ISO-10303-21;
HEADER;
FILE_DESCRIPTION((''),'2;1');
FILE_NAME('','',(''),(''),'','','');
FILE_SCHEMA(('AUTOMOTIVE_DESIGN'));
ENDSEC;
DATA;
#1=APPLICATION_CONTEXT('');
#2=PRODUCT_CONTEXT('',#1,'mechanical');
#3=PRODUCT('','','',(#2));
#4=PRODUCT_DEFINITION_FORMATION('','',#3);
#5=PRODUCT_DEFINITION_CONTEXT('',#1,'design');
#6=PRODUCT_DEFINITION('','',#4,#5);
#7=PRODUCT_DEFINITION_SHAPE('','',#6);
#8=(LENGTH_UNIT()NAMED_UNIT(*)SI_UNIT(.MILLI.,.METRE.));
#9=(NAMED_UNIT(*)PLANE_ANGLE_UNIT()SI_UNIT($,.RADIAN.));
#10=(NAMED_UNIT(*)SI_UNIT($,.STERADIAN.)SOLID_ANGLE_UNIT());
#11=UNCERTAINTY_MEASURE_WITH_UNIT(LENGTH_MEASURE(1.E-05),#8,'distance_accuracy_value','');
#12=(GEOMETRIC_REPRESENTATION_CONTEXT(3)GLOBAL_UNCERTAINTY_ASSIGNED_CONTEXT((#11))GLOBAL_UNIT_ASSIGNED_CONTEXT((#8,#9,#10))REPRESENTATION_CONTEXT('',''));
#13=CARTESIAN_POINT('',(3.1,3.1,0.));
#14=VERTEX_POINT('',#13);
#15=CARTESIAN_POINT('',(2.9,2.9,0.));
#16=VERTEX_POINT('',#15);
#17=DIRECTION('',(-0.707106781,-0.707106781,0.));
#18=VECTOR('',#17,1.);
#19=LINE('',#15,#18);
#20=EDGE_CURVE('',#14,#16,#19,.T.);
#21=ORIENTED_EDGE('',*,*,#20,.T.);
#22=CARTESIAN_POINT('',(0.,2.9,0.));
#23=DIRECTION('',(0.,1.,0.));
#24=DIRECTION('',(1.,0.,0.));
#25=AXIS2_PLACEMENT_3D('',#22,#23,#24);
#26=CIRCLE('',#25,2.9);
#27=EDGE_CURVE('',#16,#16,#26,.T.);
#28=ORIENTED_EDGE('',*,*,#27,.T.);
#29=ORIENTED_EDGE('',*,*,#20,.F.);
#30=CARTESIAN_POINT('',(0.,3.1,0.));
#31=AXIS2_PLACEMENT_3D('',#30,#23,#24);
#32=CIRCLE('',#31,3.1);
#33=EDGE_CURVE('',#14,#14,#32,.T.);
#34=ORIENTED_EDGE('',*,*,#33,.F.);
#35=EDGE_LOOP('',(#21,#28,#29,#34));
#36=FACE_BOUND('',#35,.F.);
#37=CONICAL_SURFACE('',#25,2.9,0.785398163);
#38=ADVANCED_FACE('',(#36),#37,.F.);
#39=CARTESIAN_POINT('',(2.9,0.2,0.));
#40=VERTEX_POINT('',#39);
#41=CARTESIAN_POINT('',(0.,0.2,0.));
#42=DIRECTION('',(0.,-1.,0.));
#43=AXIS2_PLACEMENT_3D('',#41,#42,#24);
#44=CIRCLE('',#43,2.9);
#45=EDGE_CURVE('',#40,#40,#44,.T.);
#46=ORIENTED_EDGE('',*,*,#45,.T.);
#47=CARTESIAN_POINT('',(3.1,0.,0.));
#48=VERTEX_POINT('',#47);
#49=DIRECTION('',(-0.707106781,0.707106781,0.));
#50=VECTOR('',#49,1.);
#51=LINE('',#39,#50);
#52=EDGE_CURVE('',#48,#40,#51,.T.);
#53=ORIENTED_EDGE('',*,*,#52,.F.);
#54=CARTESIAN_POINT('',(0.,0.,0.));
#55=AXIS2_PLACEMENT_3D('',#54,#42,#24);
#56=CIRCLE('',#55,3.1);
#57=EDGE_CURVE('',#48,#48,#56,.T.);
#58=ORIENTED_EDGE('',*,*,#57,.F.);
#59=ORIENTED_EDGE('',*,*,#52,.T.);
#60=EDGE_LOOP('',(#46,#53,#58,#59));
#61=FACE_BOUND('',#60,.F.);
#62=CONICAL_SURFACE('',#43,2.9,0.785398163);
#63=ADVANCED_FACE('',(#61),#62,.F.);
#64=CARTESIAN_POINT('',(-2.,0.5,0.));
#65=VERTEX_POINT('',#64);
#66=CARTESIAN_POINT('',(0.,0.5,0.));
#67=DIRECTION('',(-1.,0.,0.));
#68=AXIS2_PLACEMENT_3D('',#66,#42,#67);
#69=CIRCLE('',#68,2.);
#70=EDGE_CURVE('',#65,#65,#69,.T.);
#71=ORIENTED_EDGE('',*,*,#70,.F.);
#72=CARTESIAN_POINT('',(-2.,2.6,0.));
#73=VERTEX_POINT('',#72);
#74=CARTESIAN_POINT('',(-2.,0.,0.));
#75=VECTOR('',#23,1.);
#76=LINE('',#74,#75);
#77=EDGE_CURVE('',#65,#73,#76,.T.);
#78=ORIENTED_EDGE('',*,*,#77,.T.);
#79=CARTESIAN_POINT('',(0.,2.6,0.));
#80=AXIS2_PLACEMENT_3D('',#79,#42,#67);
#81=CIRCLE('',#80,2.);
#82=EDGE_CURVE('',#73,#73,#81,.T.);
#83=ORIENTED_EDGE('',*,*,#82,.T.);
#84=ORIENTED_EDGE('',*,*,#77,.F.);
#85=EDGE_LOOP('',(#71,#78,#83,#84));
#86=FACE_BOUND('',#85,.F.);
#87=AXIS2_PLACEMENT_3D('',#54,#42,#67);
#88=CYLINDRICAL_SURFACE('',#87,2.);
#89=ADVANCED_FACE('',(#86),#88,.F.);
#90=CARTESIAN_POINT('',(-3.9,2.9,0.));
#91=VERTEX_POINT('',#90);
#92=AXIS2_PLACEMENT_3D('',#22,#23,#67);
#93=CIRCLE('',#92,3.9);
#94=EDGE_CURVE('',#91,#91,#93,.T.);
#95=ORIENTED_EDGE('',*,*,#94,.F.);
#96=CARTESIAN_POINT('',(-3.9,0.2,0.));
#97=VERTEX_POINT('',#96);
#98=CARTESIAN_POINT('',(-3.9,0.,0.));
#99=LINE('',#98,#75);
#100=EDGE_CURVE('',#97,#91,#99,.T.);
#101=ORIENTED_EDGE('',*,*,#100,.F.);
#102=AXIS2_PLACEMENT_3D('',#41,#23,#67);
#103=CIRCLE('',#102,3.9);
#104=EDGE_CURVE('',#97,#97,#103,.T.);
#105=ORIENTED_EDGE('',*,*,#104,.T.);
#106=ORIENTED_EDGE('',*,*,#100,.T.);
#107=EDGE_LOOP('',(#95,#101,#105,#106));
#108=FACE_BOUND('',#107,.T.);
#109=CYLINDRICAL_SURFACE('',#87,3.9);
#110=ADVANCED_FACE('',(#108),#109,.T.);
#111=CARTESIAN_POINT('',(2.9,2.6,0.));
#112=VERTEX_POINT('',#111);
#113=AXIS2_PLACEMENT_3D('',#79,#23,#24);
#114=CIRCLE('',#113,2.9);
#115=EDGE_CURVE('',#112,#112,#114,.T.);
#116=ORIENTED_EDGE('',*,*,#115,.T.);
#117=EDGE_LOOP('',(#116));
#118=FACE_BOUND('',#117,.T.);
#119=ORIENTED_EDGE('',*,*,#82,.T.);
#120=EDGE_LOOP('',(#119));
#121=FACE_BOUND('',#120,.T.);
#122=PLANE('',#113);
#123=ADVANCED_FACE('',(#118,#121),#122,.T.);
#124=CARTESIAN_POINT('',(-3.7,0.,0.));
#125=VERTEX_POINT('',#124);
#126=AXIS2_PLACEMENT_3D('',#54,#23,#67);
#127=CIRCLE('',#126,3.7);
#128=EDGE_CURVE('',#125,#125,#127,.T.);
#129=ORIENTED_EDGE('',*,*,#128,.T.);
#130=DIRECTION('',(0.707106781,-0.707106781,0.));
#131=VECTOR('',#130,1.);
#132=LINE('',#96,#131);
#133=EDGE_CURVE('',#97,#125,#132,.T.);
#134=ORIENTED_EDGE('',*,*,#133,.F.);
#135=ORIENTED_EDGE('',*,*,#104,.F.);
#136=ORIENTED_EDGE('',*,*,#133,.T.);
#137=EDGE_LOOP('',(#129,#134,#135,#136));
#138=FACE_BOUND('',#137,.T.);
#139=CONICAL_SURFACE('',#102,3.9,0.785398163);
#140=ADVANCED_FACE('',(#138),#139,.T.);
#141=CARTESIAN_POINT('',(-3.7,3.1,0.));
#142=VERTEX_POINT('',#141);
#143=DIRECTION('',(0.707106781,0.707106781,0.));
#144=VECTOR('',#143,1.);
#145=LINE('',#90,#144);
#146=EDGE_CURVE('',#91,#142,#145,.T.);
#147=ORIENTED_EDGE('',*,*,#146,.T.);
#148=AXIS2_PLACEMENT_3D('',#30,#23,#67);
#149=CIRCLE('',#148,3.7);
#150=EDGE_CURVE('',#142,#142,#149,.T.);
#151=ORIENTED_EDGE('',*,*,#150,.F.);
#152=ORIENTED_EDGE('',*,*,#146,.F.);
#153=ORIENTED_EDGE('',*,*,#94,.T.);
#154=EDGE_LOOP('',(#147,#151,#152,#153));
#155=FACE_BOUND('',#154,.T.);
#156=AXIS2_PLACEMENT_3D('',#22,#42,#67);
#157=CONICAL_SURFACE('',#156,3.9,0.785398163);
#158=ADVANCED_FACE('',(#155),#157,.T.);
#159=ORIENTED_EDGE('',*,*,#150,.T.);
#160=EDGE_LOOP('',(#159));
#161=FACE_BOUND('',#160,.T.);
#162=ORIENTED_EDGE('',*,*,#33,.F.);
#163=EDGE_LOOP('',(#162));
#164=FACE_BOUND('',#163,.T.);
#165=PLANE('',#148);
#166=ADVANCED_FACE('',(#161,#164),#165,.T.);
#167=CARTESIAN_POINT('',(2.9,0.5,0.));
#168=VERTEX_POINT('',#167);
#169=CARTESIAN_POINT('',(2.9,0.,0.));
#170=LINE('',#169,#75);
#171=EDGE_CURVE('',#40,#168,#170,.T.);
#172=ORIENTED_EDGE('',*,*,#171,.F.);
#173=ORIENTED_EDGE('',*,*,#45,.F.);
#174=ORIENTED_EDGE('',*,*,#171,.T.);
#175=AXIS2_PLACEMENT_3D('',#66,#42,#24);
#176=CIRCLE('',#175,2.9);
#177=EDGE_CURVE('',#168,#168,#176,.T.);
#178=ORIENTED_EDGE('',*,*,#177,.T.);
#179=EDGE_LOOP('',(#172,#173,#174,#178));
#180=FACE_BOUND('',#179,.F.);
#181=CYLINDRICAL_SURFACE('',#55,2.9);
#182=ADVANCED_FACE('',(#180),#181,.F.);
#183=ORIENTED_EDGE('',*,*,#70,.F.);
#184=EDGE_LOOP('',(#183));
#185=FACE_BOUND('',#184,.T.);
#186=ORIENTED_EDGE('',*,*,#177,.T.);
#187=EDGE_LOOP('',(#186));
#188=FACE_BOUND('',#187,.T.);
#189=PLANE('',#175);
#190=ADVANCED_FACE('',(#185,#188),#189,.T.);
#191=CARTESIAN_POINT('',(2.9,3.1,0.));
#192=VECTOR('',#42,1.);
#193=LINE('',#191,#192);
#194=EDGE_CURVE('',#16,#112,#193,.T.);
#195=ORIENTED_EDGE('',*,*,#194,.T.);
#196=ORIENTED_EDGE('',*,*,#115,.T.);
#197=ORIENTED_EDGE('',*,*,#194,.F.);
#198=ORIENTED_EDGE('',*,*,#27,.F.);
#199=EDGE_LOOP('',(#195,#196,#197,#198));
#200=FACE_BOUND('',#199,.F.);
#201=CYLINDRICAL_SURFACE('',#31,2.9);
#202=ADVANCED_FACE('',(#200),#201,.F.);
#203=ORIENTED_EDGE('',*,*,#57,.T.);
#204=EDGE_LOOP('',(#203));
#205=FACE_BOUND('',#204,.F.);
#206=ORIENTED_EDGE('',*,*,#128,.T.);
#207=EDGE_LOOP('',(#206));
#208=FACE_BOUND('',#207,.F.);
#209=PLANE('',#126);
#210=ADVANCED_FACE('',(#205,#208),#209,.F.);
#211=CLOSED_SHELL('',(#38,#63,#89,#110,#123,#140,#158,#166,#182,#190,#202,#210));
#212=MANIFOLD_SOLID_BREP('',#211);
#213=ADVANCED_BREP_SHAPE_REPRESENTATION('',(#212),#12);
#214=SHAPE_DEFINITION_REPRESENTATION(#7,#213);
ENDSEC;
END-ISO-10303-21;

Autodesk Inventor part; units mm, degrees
ref_plane "YZ Plane" through (0, 0, 0) normal (1, 0, 0) x (0, 1, 0)
ref_plane "XZ Plane" through (0, 0, 0) normal (0, 1, 0) x (-1, 0, 0)
ref_plane "XY Plane" through (0, 0, 0) normal (0, 0, 1) x (1, 0, 0)
sketch "Эскиз1" plane through (0, 0, 0) normal (0, 1, 0) x (-1, 0, 0)
  circle A0 centre (0, 0) radius 3.9
  circle A1 centre (0, 0) radius 2
  dimension "d0" = 7.8
  dimension "d1" = 4
extrude "Выдавливание1" add sketch "Эскиз1" along normal blind 3.1
sketch "Эскиз2" plane through (0, 3.1, 0) normal (0, 1, 0) x (1, 0, 0)
  circle A0 centre (0, 0) radius 3
  circle A1 centre (0, 0) radius 2.9
  circle A2 centre (0, 0) radius 3.9 projected
  circle A3 centre (0, 0) radius 2 projected
  dimension "d4" = 1
  dimension "d5" = 1
extrude "Выдавливание2" cut sketch "Эскиз2" against normal blind 0.5 contours A1 | A3
sketch "Эскиз3" plane through (0, 0, 0) normal (0, -1, 0) x (1, 0, 0)
  circle A0 centre (0, 0) radius 2.9 projected
  circle A1 centre (0, 0) radius 3
  circle A2 centre (0, 0) radius 2.9
  circle A3 centre (0, 0) radius 3.9
  circle A4 centre (0, 0) radius 2
  dimension "d13" = 1
  dimension "d14" = 1
extrude "Выдавливание3" cut sketch "Эскиз3" against normal blind 0.5 contours A0 | A4
chamfer "Фаска1" distance 0.2 angle 45 4 edges at (-2.9, 0, 0) (3.9, 0, 0) (3.9, 3.1, 0) (-2.9, 3.1, 0)
properties part number "Подшипник 626Z" material "Титан"
